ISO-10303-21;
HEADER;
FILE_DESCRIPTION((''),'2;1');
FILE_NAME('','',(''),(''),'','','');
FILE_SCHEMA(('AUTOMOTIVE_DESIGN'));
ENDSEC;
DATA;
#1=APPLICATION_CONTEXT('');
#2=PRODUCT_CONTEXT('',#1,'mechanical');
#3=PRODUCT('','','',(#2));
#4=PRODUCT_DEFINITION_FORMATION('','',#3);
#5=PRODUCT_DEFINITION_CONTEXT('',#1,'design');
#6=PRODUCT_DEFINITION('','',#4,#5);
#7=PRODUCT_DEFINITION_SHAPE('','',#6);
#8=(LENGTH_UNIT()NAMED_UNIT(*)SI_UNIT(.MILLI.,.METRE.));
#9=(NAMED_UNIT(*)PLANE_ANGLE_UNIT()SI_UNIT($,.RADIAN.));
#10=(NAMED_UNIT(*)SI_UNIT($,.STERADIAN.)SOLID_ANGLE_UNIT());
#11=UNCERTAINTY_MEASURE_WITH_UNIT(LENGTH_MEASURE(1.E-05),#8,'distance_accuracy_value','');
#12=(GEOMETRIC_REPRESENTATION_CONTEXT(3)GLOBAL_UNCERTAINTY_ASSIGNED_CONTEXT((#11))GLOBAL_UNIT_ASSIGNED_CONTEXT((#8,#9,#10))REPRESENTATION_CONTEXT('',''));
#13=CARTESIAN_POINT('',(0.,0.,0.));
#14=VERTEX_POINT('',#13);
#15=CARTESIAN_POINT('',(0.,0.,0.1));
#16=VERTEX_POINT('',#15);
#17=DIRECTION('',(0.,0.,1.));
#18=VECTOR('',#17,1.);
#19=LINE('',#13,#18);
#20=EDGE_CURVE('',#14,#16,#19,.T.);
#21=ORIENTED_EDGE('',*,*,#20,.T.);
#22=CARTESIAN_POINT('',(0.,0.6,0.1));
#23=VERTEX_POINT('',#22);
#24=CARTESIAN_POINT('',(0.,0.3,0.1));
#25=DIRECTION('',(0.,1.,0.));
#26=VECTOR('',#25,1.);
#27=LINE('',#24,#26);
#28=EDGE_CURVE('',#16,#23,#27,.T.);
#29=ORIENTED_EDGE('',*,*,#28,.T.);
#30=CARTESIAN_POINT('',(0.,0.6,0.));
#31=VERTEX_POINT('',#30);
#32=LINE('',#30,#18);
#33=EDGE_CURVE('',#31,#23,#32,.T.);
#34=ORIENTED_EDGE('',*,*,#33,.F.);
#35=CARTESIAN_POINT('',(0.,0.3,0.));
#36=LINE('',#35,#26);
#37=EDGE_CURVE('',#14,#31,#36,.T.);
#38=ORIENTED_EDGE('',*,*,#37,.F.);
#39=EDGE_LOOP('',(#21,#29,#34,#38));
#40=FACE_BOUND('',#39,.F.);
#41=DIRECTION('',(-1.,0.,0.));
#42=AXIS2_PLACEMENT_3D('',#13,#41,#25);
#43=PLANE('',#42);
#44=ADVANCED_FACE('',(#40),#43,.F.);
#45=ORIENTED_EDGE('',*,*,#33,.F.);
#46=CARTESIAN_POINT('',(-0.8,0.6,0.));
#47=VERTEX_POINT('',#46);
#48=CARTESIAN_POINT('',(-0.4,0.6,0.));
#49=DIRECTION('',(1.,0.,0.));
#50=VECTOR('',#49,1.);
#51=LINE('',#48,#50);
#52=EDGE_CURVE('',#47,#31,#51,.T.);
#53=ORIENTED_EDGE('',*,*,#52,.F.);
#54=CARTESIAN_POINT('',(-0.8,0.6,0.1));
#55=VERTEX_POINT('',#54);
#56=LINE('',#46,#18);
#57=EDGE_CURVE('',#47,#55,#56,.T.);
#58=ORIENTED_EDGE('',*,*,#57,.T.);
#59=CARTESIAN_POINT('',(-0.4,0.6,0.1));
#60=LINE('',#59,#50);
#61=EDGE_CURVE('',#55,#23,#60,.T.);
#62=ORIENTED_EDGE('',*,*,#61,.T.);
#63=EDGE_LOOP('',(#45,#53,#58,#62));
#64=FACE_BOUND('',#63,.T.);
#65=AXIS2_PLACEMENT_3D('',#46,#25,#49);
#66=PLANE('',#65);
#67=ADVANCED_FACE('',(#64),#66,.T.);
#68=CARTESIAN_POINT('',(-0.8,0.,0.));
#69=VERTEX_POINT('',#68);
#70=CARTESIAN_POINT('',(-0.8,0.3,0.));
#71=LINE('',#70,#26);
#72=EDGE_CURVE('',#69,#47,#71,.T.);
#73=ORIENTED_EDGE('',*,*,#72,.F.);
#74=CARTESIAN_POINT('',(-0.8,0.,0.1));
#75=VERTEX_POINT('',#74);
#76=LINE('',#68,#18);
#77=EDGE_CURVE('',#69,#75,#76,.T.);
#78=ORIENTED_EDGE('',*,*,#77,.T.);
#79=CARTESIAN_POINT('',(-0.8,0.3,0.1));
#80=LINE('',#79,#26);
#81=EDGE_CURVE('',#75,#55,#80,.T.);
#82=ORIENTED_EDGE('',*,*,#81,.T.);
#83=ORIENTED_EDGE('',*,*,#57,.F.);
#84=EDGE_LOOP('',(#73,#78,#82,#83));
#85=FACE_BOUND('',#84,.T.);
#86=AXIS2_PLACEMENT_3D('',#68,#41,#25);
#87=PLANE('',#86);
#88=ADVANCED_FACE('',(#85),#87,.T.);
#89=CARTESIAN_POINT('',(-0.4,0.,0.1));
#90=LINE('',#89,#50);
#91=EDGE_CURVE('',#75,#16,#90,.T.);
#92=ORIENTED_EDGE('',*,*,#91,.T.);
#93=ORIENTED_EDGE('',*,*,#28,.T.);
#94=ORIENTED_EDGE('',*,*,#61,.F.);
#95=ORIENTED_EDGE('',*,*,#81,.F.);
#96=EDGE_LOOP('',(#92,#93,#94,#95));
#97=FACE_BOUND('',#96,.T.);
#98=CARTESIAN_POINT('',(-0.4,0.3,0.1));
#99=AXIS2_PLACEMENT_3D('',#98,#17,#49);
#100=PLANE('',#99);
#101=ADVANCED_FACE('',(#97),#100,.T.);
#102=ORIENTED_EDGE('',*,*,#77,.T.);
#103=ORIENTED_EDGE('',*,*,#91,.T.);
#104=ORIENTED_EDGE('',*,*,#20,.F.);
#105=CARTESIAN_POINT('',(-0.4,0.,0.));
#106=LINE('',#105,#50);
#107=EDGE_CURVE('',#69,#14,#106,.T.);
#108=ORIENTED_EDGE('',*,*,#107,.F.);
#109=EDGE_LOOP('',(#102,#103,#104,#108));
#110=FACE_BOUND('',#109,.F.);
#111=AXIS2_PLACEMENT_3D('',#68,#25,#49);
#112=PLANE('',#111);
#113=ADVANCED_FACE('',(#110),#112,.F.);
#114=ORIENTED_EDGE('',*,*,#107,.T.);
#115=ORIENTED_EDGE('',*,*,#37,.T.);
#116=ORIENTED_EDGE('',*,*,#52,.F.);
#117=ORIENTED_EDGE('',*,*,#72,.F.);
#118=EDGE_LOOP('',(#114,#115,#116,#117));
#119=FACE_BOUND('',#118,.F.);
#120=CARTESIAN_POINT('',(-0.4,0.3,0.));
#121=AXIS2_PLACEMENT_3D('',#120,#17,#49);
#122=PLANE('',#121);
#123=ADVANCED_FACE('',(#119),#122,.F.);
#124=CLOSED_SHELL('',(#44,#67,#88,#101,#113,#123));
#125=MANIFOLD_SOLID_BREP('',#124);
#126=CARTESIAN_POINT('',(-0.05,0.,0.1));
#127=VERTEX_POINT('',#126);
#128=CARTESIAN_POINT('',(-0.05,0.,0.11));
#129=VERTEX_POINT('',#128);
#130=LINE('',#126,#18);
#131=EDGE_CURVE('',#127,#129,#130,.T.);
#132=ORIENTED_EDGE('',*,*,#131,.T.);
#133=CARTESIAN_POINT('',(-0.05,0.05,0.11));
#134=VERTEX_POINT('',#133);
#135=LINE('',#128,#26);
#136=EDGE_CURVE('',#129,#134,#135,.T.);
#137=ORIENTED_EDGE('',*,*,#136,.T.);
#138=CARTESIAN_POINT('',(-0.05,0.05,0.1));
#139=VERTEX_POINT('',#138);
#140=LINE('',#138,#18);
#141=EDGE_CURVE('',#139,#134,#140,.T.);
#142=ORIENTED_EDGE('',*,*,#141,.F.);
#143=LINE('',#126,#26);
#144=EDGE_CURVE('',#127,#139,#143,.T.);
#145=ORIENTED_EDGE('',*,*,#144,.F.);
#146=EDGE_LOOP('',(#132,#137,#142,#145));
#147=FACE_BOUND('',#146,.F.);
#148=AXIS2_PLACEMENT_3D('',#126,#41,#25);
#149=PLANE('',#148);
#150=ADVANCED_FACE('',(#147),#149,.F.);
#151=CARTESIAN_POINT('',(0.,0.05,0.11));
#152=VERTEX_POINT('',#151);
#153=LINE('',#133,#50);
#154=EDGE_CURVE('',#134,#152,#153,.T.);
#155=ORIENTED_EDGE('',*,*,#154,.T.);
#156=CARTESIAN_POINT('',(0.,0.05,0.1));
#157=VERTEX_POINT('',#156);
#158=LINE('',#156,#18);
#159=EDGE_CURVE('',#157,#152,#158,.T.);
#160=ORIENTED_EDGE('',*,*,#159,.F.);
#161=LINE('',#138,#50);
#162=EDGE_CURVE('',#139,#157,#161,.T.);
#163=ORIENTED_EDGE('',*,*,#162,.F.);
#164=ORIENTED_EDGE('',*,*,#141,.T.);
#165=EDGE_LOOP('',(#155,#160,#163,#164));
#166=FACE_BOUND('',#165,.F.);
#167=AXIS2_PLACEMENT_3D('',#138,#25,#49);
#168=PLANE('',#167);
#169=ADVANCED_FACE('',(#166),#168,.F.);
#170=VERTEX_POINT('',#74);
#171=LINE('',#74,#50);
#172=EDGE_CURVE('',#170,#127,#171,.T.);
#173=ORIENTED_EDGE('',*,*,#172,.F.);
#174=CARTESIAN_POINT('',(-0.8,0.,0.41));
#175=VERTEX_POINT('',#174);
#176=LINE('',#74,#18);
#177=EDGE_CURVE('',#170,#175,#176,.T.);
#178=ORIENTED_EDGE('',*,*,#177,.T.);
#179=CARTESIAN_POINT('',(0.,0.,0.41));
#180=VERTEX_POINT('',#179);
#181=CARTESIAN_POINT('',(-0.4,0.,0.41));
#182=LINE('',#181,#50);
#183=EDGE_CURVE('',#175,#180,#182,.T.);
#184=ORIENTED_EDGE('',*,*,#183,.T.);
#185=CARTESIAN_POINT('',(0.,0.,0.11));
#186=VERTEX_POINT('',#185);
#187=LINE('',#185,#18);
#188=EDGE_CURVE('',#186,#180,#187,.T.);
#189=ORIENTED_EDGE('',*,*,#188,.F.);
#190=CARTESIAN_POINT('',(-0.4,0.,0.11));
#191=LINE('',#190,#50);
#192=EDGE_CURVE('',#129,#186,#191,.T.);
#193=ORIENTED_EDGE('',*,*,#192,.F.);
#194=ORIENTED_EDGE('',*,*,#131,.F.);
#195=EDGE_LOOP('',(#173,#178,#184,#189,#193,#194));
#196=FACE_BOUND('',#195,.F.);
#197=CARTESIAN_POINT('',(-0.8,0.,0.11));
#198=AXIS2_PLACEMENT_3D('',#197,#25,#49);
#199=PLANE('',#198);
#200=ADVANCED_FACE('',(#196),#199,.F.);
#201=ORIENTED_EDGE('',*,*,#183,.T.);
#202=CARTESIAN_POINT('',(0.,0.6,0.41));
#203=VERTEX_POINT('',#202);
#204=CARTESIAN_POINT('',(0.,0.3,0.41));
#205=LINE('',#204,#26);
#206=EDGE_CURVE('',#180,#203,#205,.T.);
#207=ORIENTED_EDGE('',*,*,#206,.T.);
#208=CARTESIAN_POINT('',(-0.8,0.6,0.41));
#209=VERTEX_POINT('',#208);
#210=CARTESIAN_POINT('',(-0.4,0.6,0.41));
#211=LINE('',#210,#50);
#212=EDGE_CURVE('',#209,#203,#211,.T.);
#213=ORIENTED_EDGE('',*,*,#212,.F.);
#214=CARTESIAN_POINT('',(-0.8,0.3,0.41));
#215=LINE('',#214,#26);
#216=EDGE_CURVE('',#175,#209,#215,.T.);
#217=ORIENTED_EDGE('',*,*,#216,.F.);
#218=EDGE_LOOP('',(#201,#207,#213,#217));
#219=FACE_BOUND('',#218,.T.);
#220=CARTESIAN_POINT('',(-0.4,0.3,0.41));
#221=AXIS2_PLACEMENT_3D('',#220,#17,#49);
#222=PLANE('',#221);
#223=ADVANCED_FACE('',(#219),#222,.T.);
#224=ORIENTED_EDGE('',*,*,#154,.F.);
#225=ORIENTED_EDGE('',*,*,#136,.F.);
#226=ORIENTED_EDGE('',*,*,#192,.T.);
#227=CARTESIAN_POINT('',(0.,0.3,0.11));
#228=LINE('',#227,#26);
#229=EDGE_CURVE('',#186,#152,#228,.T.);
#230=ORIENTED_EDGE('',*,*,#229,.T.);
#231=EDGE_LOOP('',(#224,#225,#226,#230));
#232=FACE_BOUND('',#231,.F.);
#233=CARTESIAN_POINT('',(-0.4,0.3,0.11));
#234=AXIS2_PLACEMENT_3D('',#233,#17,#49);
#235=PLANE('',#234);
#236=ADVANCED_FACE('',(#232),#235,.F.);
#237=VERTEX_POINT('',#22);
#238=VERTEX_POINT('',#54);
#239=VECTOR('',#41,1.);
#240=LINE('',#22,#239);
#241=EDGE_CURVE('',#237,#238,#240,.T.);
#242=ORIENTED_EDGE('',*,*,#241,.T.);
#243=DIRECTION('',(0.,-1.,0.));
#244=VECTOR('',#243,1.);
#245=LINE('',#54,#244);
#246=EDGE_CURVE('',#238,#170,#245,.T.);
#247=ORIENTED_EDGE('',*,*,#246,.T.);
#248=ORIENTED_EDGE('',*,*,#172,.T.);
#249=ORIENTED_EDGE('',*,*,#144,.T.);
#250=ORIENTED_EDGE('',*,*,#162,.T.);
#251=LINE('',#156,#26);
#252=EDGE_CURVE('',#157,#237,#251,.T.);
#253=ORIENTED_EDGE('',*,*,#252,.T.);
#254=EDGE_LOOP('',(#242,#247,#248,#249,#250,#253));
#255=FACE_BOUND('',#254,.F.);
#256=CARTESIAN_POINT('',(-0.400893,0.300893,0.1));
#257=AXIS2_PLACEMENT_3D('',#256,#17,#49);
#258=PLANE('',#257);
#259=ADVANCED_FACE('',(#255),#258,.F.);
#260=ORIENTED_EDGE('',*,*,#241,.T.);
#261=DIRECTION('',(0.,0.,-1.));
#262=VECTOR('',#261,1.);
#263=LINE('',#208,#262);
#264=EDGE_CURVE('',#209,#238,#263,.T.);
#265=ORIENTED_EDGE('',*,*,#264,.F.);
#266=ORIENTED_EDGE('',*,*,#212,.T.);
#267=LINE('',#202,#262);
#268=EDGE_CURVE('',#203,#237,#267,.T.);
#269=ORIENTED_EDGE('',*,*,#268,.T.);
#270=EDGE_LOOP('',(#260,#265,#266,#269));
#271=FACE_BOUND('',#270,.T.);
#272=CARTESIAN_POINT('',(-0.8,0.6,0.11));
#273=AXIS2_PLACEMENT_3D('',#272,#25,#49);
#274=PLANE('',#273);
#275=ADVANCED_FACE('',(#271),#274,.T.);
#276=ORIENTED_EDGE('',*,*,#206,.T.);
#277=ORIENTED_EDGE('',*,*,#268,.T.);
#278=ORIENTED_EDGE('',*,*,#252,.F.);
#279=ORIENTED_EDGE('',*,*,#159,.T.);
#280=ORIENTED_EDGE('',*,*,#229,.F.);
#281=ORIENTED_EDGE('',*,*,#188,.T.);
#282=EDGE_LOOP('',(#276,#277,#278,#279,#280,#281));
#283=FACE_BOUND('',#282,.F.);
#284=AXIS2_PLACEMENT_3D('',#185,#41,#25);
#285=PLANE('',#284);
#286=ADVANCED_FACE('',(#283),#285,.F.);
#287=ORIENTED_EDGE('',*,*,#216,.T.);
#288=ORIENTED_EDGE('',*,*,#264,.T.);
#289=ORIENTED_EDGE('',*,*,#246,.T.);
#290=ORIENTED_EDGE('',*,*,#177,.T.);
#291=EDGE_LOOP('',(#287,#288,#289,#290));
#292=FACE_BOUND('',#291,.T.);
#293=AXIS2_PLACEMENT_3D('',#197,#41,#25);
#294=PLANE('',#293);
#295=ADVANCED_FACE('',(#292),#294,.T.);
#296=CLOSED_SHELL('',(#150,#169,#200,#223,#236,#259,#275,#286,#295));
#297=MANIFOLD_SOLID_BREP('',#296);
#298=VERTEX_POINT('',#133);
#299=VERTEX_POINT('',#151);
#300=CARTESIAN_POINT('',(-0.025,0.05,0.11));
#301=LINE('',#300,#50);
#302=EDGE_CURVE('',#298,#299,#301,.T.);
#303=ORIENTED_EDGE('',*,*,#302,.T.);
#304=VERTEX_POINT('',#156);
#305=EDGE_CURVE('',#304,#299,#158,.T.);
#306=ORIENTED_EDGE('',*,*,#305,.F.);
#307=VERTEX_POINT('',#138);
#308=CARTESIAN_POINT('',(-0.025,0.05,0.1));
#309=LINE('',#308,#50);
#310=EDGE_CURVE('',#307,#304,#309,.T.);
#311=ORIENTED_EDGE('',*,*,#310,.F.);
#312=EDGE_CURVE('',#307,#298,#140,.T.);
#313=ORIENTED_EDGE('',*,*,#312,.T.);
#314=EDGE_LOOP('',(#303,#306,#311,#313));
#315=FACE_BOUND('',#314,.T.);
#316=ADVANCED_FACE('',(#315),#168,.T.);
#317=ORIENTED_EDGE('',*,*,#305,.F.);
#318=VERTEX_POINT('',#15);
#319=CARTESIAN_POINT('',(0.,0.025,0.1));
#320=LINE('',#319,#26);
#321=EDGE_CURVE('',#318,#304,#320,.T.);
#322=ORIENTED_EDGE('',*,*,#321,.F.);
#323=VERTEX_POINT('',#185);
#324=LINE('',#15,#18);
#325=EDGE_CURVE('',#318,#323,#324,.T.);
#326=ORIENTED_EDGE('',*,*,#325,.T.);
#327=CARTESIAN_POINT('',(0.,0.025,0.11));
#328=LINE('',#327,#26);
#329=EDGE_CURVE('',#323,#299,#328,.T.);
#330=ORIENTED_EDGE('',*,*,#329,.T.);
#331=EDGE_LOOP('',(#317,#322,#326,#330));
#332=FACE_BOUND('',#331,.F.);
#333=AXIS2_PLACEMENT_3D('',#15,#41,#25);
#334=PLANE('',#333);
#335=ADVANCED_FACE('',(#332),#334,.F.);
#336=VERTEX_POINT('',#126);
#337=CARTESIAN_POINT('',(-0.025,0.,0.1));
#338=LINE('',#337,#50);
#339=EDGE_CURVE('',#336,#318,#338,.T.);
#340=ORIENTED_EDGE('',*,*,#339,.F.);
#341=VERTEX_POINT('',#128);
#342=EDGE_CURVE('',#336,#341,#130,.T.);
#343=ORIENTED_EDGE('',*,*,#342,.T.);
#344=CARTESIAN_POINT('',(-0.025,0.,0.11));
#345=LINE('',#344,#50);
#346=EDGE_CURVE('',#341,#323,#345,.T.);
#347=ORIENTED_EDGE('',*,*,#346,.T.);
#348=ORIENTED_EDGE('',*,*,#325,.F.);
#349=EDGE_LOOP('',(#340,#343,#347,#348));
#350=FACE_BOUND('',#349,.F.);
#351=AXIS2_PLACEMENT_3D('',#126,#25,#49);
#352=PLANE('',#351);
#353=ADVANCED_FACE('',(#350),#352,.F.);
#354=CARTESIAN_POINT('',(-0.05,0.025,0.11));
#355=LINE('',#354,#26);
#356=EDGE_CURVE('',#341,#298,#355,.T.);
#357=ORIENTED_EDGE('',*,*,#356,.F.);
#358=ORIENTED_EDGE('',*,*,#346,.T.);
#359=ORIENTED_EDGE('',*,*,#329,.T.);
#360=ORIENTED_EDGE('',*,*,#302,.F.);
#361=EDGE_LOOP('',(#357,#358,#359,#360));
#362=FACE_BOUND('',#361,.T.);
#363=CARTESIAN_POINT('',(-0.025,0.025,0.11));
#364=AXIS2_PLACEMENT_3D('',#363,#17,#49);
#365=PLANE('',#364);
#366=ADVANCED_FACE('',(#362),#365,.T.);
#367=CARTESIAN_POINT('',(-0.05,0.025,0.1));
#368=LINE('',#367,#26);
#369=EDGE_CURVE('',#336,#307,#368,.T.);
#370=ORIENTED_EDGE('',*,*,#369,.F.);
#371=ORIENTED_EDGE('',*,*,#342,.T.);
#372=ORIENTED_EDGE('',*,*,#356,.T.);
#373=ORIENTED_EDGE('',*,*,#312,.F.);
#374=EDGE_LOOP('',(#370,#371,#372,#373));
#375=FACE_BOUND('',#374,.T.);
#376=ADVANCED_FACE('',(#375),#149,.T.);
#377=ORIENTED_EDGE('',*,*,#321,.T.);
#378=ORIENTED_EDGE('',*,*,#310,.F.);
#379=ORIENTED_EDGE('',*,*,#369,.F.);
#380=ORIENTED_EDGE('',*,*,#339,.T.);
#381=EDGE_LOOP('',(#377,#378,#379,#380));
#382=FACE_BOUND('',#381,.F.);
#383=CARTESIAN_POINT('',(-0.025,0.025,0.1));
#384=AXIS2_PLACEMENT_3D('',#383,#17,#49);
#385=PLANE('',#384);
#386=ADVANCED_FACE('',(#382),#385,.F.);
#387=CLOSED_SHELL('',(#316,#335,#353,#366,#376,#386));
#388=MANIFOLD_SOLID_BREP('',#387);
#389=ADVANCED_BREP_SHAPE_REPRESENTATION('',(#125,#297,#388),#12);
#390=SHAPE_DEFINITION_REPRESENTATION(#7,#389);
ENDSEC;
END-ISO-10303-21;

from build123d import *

# Parameters (mm, degrees)
F0_W     = 0.8
F0_H     = 0.6
F1_DEPTH = 0.1
F2_W     = 0.05
F2_H     = 0.05
F3_DEPTH = 0.01
F5_DEPTH = 0.01
F6_W     = 0.8
F6_H     = 0.6
F7_DEPTH = 0.3


with BuildPart() as f1:
    # F0 (on Top) → F1 (new body)
    with BuildSketch(Plane.XY):
        with Locations((-0.4, 0.3)):
            Rectangle(F0_W, F0_H)
    extrude(amount=F1_DEPTH)


with BuildPart() as f3:
    # F2 (on face) → F3 (new body)
    with BuildSketch(Plane.XY.offset(0.1)):
        with Locations((-0.025, 0.025)):
            Rectangle(F2_W, F2_H)
    extrude(amount=F3_DEPTH)


with BuildPart() as f5:
    # F4 (on face) → F5 (new body)
    with BuildSketch(Plane.XY.offset(0.1)):
        Polygon((0, 0.6), (-0.8, 0.6), (-0.8, 0), (-0.05, 0), (-0.05, 0.05), (0, 0.05), align=None)
    extrude(amount=F5_DEPTH)

    # F6 (on face) → F7 (join)
    with BuildSketch(Plane.XY.offset(0.11)):
        with Locations((-0.4, 0.3)):
            Rectangle(F6_W, F6_H)
    extrude(amount=F7_DEPTH)


solid = Compound([f1.part, f3.part, f5.part])
